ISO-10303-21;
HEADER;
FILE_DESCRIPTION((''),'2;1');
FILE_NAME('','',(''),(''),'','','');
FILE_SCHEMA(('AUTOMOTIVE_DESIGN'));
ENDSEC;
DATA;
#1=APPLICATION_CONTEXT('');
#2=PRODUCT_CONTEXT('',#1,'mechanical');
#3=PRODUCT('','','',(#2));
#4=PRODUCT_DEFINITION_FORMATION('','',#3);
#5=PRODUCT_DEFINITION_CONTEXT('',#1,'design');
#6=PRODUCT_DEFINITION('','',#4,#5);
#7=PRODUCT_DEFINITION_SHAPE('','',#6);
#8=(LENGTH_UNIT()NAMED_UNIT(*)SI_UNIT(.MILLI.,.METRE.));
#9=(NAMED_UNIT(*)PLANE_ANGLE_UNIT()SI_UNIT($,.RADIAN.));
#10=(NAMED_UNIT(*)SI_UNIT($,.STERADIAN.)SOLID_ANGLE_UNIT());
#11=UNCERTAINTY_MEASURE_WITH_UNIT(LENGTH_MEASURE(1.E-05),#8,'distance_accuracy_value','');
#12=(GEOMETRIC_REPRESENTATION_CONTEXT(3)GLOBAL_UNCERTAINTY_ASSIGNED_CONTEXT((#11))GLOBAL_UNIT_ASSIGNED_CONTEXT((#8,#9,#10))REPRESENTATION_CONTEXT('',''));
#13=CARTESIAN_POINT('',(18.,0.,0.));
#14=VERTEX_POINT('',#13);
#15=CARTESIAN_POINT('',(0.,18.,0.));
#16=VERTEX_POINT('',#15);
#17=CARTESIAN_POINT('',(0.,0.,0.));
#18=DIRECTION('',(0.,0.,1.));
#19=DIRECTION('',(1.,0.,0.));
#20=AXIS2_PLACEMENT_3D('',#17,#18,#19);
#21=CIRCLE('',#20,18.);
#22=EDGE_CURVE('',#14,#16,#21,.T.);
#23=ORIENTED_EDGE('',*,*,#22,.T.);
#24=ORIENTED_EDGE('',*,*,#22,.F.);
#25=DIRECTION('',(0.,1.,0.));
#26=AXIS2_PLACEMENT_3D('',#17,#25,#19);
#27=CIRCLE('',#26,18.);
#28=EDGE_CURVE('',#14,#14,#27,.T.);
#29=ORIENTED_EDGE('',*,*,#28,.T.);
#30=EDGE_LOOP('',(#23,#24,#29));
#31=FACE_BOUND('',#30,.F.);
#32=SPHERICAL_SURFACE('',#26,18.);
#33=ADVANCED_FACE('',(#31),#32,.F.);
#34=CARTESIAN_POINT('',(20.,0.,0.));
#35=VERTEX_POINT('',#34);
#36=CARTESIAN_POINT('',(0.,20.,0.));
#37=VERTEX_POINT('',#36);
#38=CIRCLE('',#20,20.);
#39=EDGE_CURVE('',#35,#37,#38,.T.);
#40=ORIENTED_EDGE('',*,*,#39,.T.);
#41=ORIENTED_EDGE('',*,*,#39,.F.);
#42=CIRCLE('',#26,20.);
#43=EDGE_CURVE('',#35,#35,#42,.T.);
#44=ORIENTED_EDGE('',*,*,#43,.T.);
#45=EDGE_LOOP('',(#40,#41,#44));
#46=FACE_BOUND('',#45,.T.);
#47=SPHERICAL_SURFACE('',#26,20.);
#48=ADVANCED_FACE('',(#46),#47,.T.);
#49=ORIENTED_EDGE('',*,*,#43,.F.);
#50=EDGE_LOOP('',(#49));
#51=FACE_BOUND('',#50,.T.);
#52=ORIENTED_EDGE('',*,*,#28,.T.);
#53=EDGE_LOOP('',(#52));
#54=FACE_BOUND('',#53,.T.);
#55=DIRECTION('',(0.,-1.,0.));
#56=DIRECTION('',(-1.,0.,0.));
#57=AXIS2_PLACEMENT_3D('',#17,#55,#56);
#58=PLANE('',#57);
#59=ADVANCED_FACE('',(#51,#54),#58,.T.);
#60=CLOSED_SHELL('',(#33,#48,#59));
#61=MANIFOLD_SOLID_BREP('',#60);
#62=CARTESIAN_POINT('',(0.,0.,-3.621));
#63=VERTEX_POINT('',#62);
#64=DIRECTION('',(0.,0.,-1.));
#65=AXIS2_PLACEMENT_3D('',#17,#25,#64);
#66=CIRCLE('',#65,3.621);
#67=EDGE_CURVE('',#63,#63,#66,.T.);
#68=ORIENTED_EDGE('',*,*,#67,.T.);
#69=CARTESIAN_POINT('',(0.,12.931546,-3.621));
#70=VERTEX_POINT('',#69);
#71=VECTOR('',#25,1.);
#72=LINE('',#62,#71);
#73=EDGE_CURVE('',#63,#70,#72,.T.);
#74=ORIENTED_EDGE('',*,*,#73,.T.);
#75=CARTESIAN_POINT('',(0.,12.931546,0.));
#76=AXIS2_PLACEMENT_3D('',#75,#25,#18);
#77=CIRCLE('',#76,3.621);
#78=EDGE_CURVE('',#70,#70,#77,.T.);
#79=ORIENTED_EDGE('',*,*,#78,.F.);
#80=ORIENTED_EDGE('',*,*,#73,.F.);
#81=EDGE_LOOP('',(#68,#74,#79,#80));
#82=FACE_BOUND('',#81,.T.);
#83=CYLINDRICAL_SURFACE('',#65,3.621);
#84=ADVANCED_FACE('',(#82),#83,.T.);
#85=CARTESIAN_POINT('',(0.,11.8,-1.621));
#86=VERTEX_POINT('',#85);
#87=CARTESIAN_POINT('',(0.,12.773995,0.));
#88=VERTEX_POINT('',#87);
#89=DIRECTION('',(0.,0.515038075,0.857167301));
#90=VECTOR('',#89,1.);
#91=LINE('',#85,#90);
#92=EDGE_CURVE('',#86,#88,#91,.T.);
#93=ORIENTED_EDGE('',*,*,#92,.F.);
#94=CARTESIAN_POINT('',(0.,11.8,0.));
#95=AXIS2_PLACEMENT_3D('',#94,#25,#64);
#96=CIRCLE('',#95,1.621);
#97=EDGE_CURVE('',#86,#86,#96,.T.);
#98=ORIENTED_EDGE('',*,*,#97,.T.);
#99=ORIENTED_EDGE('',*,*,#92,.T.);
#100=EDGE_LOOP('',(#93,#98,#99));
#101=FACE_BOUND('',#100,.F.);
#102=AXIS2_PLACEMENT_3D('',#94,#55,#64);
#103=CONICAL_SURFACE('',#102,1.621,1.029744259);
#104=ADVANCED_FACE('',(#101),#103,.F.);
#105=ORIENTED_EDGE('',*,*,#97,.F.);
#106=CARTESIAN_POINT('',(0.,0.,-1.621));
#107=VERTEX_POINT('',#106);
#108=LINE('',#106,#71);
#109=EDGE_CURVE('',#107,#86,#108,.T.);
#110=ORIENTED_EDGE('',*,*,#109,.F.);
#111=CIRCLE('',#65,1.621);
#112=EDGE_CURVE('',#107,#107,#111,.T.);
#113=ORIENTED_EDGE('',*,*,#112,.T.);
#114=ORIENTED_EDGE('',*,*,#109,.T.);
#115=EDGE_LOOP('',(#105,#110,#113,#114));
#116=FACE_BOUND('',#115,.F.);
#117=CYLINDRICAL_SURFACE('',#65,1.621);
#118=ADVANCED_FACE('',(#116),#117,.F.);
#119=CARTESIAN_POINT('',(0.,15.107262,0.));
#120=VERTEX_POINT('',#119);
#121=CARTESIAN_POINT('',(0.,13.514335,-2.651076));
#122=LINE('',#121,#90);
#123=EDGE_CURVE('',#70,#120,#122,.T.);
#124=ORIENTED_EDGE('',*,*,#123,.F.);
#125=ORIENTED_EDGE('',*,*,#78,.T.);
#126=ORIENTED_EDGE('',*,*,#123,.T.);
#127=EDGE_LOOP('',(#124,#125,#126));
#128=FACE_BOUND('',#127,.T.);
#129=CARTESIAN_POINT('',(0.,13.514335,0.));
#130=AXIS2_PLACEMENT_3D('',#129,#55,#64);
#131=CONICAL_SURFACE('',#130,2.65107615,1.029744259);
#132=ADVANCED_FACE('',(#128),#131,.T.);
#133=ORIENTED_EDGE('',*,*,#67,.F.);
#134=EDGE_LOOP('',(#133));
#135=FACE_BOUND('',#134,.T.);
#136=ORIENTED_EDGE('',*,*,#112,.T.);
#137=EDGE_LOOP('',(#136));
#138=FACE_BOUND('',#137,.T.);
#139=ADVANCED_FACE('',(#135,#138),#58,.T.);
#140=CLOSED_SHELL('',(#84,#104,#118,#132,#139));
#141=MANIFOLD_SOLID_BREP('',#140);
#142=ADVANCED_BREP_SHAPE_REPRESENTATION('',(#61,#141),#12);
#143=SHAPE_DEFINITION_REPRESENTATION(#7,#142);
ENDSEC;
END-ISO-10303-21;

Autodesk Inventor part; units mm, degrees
ref_plane "YZ Plane" through (0, 0, 0) normal (1, 0, 0) x (0, 1, 0)
ref_plane "XZ Plane" through (0, 0, 0) normal (0, 1, 0) x (-1, 0, 0)
ref_plane "XY Plane" through (0, 0, 0) normal (0, 0, 1) x (1, 0, 0)
sketch "Sketch1" plane through (0, 0, 0) normal (0, 0, 1) x (1, 0, 0)
  line L0 (0, 0) -> (0, 20)
  line L1 (0, 0) -> (20, 0)
  arc A0 (20, 0) -> (0, 20) centre (0, 0) ccw
  line L2 (0, -4.8284) -> (0, 28.9706) projected
  dimension "d2" = 20
revolve "Revolution1" add sketch "Sketch1" angle 360 about axis through (0, -10, 0) along (0, 1, 0)
sketch "Sketch4" plane through (0, 0, 0) normal (0, -1, 0) x (1, 0, 0)
  point P0 (0, 0)
  point P1 (0, 0)
hole "Hole2" at (0, 0, 0) direction (0, 1, 0) diameter 3.242 depth 11.8 tip angle 118 thread size "M4x0.7" class "6H" standard "ANSI Metric M Profile"
shell "Shell2" thickness 2 removed faces 1 at (13.676, 0, 1.6606)
properties part number "Ball_Upper Half" material "Nylon 6/6"
